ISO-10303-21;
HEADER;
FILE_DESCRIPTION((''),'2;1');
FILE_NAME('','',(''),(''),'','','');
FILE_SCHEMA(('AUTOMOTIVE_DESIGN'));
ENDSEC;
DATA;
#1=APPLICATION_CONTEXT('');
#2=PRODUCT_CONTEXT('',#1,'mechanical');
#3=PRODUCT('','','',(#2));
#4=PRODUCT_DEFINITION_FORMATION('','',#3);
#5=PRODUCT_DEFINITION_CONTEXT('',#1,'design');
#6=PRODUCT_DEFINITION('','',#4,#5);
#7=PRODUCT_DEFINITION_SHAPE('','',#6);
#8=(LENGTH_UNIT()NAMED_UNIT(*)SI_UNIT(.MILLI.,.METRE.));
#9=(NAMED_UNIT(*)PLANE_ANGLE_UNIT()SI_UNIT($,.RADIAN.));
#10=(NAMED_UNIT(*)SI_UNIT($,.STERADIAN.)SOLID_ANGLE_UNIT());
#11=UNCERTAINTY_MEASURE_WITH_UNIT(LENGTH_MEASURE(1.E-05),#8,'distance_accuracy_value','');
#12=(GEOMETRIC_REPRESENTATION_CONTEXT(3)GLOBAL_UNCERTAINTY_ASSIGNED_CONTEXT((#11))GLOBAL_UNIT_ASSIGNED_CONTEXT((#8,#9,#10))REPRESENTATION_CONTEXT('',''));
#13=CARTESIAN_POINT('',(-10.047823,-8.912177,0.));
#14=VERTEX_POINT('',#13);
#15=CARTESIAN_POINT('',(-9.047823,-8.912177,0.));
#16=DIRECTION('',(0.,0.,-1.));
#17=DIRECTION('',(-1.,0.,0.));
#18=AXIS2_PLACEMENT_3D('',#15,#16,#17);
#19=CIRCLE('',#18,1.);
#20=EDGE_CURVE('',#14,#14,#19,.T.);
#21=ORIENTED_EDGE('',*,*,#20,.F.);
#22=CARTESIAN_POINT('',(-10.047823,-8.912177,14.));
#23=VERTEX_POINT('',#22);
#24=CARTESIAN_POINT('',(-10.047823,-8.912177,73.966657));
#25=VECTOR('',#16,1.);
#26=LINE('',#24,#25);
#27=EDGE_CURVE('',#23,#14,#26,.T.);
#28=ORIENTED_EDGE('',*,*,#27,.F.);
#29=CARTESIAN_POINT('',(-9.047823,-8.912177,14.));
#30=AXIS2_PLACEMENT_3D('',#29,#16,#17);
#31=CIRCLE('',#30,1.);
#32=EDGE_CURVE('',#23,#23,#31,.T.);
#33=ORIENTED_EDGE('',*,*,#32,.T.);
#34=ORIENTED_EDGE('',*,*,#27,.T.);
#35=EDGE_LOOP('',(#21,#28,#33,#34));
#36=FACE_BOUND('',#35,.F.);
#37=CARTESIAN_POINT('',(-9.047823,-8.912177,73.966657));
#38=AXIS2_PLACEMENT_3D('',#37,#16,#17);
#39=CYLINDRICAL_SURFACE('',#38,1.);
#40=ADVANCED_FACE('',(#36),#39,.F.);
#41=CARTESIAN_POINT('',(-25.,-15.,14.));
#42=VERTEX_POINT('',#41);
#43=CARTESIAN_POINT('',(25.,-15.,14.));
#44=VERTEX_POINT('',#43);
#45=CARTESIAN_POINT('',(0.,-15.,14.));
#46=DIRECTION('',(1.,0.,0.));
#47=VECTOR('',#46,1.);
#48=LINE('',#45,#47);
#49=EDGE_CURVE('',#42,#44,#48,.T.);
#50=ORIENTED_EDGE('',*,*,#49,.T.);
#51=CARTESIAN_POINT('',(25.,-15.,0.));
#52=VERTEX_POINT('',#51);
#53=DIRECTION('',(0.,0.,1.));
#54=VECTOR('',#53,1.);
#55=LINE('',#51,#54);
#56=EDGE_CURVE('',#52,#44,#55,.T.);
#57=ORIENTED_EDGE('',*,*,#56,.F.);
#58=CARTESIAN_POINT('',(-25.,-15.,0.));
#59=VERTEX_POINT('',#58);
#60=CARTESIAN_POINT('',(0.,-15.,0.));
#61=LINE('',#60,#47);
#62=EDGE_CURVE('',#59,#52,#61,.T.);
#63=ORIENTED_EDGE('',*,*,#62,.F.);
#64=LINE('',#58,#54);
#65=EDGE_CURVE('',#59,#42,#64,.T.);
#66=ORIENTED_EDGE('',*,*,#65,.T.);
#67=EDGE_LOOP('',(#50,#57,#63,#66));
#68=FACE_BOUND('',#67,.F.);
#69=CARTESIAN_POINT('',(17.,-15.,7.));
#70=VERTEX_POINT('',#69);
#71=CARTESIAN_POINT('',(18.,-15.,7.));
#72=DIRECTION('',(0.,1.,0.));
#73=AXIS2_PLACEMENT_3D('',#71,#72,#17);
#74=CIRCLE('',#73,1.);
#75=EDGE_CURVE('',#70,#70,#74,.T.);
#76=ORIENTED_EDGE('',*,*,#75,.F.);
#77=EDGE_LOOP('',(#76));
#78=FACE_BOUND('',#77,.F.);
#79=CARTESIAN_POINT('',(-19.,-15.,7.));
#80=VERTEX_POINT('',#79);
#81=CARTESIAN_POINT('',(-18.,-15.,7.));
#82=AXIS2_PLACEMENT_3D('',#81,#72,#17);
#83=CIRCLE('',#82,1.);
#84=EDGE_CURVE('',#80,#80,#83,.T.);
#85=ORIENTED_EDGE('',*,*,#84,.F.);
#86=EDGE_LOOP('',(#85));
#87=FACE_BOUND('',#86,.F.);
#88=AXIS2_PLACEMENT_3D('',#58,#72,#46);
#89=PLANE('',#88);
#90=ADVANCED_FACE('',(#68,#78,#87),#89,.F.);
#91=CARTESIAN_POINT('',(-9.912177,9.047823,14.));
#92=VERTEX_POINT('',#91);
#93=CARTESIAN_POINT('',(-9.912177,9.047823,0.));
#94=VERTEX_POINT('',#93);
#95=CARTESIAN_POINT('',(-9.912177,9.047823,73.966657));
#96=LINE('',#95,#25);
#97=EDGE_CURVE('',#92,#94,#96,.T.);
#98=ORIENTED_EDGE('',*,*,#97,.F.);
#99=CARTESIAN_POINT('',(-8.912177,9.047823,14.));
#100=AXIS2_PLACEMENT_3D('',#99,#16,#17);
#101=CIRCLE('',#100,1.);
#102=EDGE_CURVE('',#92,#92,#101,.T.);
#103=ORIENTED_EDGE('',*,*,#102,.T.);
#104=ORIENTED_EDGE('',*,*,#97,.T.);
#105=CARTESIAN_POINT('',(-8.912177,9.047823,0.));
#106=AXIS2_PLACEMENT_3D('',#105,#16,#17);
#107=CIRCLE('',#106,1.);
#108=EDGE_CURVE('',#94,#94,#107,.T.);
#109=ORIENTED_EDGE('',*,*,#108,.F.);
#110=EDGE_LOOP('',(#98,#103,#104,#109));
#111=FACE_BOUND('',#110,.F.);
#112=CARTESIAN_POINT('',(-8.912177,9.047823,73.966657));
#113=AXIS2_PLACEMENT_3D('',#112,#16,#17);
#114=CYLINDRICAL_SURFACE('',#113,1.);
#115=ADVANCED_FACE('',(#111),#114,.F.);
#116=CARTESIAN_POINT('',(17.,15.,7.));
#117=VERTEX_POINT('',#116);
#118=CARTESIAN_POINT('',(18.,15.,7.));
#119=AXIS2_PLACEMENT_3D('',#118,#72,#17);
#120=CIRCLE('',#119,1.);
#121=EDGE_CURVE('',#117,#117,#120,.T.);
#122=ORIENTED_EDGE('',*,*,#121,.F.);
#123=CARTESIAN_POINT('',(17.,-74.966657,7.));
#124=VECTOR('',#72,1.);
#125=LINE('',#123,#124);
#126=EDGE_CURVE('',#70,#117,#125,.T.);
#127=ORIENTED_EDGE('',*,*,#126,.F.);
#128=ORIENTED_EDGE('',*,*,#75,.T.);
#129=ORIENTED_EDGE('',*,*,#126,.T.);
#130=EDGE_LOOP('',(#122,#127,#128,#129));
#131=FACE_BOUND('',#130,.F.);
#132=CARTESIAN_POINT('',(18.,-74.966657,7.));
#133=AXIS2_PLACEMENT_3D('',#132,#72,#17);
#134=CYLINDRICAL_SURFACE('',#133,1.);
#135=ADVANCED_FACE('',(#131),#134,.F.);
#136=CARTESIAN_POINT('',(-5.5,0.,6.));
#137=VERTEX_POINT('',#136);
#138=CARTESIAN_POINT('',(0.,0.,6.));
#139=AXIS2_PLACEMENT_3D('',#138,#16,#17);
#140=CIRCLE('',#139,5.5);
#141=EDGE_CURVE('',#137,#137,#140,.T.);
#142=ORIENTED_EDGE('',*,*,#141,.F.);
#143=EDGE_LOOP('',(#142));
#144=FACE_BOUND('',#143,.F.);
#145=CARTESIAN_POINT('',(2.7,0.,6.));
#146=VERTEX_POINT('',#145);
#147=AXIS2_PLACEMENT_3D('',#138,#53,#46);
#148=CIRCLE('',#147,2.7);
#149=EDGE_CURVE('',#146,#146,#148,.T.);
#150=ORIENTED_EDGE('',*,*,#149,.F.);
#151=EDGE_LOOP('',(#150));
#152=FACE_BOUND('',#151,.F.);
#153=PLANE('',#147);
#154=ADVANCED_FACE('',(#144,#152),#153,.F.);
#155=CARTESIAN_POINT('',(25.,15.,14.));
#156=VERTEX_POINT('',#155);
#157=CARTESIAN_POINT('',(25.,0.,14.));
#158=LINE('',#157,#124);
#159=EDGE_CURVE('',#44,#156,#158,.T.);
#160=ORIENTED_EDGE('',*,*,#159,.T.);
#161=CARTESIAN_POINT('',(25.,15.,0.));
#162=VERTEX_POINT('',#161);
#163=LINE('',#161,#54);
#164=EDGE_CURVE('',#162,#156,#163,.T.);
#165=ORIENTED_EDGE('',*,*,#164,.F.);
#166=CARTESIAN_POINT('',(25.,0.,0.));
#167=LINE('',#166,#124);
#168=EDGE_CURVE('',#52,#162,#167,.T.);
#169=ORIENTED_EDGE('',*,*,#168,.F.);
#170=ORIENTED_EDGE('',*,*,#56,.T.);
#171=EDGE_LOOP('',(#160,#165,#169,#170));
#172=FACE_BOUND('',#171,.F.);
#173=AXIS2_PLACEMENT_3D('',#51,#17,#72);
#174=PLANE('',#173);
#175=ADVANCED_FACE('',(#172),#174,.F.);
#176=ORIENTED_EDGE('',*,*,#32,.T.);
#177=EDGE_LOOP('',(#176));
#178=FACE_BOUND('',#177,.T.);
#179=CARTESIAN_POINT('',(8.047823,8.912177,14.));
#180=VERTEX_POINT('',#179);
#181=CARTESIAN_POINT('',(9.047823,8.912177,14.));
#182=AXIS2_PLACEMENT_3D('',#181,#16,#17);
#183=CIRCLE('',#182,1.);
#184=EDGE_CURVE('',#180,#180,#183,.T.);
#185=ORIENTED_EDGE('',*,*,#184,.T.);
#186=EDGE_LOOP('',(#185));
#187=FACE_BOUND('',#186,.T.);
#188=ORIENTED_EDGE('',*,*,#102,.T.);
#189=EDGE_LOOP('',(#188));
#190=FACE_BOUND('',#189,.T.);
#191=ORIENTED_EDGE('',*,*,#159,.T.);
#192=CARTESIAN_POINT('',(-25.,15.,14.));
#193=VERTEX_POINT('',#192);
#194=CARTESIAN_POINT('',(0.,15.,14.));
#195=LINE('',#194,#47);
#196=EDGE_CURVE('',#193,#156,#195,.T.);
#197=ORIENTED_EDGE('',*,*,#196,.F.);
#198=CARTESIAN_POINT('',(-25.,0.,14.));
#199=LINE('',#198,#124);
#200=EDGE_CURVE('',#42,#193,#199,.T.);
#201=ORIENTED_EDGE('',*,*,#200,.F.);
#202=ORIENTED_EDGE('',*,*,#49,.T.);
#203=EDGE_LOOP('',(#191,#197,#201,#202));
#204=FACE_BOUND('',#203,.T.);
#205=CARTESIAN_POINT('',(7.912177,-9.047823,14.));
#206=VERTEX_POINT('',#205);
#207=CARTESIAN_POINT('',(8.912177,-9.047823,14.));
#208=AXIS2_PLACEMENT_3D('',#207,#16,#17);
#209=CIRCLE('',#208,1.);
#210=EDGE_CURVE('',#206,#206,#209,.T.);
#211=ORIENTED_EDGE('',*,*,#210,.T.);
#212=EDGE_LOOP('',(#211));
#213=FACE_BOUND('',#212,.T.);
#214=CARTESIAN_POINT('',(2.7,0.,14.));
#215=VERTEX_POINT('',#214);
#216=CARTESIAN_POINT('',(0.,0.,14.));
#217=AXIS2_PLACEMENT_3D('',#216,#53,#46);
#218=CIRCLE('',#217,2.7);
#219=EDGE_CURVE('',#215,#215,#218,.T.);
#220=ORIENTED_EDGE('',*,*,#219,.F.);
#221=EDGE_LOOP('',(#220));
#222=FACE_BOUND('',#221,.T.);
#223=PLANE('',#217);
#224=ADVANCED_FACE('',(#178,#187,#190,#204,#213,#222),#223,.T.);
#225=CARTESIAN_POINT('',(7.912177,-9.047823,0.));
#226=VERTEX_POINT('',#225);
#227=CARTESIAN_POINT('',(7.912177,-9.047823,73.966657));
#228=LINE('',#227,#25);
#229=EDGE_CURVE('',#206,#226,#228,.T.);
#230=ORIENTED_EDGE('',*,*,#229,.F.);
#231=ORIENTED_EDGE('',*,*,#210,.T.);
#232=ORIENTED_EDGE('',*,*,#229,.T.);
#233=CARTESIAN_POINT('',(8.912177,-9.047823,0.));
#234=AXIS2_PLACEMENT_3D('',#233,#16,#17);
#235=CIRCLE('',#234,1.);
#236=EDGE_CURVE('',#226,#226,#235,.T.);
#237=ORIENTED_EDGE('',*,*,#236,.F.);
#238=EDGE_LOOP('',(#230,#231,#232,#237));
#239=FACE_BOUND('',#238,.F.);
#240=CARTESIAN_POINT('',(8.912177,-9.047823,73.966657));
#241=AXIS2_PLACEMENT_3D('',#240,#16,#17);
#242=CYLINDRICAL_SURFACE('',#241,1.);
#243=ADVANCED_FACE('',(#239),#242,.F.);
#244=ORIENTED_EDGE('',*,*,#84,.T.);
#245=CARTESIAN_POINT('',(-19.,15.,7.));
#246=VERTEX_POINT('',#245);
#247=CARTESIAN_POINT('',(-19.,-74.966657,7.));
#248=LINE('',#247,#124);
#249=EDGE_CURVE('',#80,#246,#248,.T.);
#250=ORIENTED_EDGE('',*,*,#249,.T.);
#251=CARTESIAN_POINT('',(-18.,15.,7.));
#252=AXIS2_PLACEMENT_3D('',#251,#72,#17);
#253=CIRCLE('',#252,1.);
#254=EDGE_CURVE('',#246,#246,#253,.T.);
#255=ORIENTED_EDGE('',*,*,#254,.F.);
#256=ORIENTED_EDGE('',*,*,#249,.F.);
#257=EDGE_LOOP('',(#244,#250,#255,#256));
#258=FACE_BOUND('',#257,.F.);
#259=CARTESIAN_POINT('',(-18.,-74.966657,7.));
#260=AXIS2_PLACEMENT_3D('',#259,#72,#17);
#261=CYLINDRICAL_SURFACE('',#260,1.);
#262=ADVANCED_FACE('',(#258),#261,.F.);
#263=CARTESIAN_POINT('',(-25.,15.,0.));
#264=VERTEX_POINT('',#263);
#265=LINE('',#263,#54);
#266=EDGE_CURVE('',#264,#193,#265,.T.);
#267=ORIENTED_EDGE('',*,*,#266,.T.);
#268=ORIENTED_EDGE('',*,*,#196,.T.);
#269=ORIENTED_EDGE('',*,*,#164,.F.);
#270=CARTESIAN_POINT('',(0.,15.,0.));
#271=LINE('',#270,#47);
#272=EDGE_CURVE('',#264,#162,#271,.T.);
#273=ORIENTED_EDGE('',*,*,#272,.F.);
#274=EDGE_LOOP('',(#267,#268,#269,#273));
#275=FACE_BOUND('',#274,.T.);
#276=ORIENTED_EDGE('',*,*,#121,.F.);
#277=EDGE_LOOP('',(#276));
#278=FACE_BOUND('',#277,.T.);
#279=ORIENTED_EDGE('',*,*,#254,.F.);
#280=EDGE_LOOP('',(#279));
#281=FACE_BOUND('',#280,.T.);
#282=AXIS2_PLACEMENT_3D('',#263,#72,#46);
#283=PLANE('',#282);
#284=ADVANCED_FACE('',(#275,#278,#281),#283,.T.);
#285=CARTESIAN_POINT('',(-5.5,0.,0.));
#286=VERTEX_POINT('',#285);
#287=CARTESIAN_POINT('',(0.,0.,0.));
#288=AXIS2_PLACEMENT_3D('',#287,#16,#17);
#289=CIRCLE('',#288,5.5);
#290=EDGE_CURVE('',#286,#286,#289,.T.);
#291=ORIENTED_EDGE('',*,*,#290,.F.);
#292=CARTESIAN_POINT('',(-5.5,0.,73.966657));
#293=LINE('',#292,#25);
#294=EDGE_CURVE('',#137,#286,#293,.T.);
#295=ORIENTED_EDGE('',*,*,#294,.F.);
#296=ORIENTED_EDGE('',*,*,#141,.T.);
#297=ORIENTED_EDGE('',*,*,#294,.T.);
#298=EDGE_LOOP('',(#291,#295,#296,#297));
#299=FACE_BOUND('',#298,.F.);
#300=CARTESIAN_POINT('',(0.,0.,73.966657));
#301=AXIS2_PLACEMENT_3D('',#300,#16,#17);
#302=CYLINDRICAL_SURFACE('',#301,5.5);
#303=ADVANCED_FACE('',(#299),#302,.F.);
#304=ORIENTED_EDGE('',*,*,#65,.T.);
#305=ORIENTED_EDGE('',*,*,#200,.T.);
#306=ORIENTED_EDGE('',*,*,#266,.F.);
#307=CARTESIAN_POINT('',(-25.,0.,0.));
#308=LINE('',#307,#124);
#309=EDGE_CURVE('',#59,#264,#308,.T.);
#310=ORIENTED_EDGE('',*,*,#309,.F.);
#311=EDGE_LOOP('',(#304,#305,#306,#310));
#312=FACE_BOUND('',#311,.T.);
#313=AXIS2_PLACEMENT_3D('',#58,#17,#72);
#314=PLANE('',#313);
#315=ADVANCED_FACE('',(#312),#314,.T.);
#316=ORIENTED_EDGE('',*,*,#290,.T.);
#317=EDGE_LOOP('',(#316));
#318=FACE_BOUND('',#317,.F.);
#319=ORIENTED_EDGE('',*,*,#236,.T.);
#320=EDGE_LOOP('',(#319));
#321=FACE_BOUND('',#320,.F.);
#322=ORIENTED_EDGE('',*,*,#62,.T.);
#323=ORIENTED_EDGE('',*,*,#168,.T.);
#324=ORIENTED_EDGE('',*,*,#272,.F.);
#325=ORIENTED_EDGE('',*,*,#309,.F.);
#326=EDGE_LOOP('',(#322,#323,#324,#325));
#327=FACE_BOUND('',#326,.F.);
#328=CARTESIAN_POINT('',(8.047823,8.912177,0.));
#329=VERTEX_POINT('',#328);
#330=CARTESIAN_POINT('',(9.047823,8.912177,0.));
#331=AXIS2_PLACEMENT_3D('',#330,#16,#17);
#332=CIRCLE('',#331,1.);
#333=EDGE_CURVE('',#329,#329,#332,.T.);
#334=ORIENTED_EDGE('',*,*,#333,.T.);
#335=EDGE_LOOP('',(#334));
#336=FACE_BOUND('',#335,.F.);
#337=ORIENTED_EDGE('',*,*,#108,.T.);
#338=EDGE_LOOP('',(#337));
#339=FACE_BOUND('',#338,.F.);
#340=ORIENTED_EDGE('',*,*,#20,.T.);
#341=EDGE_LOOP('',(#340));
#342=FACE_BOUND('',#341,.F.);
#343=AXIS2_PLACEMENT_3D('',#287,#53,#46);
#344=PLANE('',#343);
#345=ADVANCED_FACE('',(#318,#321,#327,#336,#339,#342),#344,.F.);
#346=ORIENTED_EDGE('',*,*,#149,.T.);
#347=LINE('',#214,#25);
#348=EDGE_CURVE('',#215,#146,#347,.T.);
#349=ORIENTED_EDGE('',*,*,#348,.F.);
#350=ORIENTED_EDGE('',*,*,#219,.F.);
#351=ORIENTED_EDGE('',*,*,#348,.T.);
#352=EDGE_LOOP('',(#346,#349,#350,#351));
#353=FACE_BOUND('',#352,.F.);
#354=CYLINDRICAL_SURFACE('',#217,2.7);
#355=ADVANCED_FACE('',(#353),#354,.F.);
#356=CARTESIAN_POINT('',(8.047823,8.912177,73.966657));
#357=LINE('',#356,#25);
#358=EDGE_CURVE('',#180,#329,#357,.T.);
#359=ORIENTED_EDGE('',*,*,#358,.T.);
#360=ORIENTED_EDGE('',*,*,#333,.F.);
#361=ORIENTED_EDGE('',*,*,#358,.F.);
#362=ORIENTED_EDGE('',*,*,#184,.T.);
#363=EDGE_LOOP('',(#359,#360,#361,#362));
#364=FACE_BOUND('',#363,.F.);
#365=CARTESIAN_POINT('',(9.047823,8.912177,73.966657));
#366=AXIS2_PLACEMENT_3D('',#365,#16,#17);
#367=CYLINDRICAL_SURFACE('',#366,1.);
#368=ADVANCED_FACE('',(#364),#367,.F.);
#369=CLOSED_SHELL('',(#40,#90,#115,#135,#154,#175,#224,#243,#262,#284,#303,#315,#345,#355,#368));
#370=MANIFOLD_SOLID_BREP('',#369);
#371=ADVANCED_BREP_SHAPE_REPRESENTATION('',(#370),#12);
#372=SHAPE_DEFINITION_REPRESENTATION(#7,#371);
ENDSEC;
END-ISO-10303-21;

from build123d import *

# Parameters (mm, degrees)
F0_W     = 50
F0_H     = 30
F1_DEPTH = 14
F3_D     = 11
F5_D     = 2
F7_D     = 2
F8_R     = 5.5
F8_R_2   = 2.7
F9_DEPTH = 8


# Not quite as in the source:
# - a feature names something its author has since deleted; it is built from what else it names


with BuildPart() as f1:
    # F0 (on Top) → F1 (new body)
    with BuildSketch(Plane.XY):
        Rectangle(F0_W, F0_H)
    extrude(amount=F1_DEPTH)

    # F3 (through all)
    with Locations(Plane.XY.offset(14)):
        with Locations((0, 0)):
            Hole(F3_D / 2)

    # F5 (through all)
    with Locations(Plane.XY.offset(14)):
        with Locations((-8.9121767002, 9.0478232998), (9.0478232998, 8.9121767002), (8.9121767002, -9.0478232998), (-9.0478232998, -8.9121767002)):
            Hole(F5_D / 2)

    # F7 (through all)
    with Locations(Plane.XZ.offset(15)):
        with Locations((18, 7), (-18, 7)):
            Hole(F7_D / 2)

    # F8 (on face) → F9 (join)
    with BuildSketch(Plane.XY.offset(14)):
        Circle(F8_R)
        Circle(F8_R_2, mode=Mode.SUBTRACT)
    extrude(amount=-F9_DEPTH)


solid = f1.part
